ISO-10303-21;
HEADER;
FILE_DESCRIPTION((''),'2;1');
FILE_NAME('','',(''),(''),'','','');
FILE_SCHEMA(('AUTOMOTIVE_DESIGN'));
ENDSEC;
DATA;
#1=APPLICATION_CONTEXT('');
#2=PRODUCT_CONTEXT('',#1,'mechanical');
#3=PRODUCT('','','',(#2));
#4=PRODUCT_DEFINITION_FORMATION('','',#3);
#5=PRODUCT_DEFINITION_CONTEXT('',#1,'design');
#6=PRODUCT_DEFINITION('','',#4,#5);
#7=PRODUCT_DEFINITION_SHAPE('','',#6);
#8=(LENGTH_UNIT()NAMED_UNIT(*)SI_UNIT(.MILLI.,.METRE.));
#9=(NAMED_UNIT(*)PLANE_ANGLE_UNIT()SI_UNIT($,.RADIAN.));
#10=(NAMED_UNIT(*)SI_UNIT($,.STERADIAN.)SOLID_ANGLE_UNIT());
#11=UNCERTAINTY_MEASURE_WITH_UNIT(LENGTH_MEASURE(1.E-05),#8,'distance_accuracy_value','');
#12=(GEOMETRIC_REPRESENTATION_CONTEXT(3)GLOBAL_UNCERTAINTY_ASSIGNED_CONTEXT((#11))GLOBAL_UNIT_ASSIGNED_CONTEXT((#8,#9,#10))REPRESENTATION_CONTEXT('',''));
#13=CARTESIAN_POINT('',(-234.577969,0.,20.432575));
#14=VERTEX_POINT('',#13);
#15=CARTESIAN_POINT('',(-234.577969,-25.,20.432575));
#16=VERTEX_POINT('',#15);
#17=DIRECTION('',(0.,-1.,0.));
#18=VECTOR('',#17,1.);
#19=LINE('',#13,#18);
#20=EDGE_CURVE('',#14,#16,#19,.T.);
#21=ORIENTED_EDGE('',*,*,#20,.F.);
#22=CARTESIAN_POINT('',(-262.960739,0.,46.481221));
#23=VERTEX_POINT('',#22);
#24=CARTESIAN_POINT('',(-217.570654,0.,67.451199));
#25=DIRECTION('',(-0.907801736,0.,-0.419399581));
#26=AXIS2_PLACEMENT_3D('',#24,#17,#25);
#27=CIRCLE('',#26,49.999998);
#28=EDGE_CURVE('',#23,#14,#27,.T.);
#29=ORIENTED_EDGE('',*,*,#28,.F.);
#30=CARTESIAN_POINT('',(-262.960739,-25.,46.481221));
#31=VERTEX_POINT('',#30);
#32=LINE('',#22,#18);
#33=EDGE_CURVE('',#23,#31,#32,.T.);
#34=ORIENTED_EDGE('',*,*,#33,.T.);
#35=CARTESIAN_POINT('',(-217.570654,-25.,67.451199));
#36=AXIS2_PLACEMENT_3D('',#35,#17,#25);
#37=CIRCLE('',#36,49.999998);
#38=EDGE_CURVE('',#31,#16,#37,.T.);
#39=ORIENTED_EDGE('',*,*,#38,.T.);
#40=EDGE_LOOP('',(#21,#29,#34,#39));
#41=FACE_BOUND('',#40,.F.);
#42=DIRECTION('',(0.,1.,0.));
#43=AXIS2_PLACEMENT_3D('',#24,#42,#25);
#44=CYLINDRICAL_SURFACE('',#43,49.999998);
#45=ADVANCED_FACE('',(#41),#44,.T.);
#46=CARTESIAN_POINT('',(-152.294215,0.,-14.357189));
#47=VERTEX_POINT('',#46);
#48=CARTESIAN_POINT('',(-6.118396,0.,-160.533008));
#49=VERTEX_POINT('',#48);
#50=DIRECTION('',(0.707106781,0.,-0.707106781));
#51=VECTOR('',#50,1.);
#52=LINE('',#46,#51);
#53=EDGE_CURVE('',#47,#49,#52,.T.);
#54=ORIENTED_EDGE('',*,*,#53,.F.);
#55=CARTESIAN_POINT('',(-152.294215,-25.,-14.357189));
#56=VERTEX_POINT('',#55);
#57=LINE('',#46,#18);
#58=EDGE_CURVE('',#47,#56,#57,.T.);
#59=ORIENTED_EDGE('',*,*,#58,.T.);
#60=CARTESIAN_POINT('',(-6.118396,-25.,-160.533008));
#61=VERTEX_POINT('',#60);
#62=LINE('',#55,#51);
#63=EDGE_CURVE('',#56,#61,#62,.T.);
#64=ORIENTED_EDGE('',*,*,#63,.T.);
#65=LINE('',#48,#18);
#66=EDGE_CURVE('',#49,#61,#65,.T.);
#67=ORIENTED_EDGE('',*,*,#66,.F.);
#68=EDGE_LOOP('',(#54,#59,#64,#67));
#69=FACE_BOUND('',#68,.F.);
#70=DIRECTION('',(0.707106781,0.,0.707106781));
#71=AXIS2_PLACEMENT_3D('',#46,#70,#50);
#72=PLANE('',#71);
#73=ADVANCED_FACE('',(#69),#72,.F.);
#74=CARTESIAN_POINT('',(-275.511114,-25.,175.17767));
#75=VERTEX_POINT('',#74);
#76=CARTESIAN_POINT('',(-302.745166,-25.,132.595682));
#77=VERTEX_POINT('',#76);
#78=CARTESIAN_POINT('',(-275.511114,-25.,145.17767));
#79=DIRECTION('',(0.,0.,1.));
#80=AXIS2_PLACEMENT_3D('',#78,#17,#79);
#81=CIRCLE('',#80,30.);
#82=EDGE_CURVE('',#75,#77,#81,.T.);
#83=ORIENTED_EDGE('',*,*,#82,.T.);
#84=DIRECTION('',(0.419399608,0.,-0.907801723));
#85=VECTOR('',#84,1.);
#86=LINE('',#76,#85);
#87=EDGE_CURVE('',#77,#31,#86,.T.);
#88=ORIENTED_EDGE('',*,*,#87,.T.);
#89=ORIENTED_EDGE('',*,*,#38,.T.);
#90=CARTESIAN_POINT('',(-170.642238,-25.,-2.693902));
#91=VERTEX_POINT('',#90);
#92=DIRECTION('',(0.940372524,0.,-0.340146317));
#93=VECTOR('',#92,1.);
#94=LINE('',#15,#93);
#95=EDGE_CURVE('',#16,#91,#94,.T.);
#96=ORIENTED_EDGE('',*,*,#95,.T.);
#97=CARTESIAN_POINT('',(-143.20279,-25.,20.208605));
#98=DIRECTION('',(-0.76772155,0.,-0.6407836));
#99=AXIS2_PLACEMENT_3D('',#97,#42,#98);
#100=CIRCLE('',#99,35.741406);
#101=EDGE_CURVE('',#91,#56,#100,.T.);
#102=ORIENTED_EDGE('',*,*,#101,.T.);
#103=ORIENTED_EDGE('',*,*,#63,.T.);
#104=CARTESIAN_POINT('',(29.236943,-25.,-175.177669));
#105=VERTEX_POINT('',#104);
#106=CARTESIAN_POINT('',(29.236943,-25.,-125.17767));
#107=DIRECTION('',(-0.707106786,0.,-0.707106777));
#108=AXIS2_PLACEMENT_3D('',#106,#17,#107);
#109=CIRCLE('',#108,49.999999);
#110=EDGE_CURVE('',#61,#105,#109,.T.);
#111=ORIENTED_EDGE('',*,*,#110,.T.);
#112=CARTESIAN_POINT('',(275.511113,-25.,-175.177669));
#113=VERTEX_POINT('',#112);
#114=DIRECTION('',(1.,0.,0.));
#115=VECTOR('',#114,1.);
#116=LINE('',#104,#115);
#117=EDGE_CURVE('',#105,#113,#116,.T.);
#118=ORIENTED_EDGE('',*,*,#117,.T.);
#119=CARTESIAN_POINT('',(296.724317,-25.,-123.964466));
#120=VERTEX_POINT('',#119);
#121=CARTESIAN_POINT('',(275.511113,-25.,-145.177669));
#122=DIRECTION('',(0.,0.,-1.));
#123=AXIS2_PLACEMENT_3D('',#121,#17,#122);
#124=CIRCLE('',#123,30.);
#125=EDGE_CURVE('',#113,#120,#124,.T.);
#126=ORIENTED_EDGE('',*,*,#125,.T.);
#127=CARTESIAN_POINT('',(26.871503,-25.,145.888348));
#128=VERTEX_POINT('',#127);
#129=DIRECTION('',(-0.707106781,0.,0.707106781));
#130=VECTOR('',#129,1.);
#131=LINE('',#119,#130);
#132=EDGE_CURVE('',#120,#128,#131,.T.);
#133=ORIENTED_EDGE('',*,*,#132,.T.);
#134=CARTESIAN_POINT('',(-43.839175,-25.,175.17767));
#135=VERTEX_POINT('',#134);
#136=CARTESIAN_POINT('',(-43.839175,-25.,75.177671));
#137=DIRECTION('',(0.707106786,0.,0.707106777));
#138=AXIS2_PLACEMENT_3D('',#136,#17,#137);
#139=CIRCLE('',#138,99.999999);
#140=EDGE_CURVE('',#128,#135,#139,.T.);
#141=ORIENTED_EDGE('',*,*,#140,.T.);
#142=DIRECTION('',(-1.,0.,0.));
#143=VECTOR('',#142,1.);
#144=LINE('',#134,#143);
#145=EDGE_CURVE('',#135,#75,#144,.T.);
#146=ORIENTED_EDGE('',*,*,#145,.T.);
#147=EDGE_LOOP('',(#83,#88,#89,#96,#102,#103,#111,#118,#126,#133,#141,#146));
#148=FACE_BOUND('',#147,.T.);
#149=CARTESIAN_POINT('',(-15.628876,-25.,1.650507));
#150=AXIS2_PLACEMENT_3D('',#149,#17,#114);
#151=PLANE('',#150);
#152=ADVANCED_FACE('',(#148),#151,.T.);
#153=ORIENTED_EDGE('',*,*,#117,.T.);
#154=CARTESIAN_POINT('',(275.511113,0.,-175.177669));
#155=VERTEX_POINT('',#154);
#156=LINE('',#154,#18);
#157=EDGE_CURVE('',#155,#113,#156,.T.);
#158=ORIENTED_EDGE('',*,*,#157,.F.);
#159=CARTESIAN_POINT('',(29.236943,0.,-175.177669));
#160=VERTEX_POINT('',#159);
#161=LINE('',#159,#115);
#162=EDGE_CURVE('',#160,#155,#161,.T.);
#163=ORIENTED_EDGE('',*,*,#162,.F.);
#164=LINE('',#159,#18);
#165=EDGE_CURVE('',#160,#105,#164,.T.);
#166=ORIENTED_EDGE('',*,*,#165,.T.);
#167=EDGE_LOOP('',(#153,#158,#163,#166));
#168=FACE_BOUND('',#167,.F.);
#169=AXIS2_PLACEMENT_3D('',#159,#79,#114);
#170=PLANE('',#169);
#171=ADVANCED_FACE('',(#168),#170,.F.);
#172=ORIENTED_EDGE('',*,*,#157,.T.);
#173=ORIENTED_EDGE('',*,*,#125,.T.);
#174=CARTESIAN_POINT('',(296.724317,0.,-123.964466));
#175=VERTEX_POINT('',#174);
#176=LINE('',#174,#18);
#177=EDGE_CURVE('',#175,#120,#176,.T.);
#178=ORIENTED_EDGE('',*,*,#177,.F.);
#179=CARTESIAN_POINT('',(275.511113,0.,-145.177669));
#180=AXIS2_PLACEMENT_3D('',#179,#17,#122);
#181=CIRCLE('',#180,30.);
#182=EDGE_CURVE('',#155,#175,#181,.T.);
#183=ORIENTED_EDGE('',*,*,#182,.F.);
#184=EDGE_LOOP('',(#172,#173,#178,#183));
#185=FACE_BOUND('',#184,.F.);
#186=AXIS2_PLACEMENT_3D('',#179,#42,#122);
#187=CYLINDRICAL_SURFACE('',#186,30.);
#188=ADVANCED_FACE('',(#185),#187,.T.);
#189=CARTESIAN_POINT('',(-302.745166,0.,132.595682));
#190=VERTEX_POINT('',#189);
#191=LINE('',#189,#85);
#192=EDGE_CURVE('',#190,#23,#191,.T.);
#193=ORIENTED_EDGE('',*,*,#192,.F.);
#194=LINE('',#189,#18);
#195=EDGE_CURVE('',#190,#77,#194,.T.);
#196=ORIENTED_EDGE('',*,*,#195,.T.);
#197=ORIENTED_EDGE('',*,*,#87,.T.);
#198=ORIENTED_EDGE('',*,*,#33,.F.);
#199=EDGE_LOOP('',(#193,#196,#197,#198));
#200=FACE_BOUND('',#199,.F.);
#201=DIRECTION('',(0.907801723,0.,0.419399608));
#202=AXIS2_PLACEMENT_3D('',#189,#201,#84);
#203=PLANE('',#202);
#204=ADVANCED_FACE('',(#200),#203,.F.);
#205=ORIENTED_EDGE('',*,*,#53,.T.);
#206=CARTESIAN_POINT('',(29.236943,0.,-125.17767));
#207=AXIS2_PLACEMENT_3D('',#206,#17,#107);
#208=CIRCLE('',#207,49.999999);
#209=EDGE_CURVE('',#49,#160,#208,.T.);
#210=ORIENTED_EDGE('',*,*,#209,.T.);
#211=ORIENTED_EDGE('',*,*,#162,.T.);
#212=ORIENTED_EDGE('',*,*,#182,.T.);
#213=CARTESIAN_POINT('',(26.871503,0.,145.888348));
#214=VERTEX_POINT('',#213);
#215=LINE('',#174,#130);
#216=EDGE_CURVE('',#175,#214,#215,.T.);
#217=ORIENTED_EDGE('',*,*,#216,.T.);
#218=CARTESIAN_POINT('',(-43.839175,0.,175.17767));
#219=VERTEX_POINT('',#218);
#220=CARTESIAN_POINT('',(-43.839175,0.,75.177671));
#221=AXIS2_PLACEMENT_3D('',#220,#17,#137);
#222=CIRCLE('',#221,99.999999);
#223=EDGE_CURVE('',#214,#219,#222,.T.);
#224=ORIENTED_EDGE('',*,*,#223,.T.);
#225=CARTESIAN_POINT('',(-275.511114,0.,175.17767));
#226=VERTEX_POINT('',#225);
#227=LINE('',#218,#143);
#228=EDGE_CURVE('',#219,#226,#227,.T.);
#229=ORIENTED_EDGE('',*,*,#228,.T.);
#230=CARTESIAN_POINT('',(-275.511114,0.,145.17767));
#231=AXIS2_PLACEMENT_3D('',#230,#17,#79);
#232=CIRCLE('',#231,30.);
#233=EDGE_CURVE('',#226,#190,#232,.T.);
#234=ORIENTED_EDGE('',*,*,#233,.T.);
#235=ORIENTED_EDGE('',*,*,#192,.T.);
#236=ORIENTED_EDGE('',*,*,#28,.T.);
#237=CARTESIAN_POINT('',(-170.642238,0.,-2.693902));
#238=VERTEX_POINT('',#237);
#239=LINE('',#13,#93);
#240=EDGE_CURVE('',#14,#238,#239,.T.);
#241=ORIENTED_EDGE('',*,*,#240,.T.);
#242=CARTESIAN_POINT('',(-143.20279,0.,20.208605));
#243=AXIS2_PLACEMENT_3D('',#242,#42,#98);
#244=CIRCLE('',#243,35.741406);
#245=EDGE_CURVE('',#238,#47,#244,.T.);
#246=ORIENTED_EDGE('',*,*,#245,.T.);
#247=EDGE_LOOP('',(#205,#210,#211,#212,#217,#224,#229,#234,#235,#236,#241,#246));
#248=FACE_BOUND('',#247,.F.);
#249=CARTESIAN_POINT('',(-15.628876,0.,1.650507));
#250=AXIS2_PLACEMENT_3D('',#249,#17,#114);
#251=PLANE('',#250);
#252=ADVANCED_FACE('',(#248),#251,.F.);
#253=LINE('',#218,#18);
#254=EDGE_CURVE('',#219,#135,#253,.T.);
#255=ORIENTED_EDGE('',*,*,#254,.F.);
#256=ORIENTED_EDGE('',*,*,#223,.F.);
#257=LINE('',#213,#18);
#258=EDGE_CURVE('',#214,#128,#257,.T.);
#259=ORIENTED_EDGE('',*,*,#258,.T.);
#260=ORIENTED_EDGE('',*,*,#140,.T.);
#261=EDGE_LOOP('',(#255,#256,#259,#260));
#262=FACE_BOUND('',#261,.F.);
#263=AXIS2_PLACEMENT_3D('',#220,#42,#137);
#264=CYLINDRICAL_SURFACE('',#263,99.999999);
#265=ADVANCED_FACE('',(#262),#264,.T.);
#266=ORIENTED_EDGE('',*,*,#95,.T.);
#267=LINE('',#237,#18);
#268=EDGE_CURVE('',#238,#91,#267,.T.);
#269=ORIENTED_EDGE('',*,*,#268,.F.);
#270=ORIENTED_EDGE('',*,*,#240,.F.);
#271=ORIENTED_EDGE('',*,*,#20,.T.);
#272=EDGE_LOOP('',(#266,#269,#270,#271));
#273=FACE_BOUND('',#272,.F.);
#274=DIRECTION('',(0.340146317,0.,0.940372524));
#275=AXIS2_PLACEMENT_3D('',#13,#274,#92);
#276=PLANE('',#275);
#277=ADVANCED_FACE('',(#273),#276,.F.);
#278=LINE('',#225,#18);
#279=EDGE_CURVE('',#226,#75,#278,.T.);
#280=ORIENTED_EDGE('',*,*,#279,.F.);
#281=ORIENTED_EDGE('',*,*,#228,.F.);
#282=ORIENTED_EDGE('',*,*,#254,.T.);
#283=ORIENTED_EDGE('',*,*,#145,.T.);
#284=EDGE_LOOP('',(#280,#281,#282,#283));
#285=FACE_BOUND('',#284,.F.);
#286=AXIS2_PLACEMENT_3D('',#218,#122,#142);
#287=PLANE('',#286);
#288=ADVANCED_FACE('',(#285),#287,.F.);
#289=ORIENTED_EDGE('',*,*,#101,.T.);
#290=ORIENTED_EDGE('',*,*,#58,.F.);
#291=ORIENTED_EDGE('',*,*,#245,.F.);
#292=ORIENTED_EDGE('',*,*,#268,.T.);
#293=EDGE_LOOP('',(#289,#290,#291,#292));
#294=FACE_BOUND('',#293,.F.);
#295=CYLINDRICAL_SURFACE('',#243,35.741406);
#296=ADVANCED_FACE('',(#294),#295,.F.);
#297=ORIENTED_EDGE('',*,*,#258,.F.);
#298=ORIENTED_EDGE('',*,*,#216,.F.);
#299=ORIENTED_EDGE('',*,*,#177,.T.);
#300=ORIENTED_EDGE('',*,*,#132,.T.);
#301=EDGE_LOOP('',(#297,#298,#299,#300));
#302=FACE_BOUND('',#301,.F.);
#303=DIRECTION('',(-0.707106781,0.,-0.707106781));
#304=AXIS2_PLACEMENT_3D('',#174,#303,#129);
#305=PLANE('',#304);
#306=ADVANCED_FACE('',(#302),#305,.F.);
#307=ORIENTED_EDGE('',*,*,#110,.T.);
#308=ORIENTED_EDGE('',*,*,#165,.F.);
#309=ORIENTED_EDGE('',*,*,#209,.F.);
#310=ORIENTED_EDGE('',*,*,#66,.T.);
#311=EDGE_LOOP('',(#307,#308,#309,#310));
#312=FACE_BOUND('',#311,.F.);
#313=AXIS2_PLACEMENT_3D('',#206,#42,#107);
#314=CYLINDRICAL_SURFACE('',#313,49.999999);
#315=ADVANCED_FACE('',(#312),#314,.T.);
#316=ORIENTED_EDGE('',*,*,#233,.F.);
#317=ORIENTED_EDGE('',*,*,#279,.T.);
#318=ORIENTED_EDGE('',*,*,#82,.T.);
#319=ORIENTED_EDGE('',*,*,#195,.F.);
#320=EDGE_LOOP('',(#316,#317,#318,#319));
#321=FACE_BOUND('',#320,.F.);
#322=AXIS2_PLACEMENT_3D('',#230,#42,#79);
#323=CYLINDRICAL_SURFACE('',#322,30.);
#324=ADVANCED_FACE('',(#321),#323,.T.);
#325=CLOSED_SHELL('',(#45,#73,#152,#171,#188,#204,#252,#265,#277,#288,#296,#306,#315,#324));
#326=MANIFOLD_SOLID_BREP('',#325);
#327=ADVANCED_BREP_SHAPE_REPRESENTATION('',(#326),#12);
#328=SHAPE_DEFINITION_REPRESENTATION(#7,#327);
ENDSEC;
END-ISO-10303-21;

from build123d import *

# Parameters (mm, degrees)
F1_DEPTH = 25


# Not quite as in the source:
# - ends of sketch curves that miss each other by under 0.0002 mm in the source are joined


with BuildPart() as f1:
    # F0 (on Front) → F1 (new body)
    with BuildSketch(Plane.XZ):
        with BuildLine():
            ThreePointArc((-170.642238, -2.693902), (-124.029000476, 50.3717259287), (-152.294215, -14.357189))
            Line((-152.294215, -14.357189), (-6.118396, -160.533008))
            ThreePointArc((-6.118396, -160.533008), (10.1027713817, -171.3716456256), (29.236943, -175.177669))
            Line((29.236943, -175.177669), (275.511113, -175.177669))
            ThreePointArc((275.511113, -175.177669), (303.22749884, -156.6581722976), (296.7243169356, -123.9644660644))
            Line((296.7243169356, -123.9644660644), (26.871503, 145.888348))
            ThreePointArc((26.871503, 145.888348), (-5.5708317635, 167.5656232511), (-43.839175, 175.17767))
            Line((-43.839175, 175.17767), (-275.511114, 175.17767))
            ThreePointArc((-275.511114, 175.17767), (-300.7842187682, 161.3415239766), (-302.7451656672, 132.5956816918))
            Line((-302.7451656672, 132.5956816918), (-262.960739, 46.481221))
            ThreePointArc((-262.960739, 46.481221), (-251.37881686, 30.6136107366), (-234.5779690393, 20.4325748914))
            Line((-234.5779690393, 20.4325748914), (-170.642238, -2.693902))
        make_face()
    extrude(amount=F1_DEPTH)


solid = f1.part
